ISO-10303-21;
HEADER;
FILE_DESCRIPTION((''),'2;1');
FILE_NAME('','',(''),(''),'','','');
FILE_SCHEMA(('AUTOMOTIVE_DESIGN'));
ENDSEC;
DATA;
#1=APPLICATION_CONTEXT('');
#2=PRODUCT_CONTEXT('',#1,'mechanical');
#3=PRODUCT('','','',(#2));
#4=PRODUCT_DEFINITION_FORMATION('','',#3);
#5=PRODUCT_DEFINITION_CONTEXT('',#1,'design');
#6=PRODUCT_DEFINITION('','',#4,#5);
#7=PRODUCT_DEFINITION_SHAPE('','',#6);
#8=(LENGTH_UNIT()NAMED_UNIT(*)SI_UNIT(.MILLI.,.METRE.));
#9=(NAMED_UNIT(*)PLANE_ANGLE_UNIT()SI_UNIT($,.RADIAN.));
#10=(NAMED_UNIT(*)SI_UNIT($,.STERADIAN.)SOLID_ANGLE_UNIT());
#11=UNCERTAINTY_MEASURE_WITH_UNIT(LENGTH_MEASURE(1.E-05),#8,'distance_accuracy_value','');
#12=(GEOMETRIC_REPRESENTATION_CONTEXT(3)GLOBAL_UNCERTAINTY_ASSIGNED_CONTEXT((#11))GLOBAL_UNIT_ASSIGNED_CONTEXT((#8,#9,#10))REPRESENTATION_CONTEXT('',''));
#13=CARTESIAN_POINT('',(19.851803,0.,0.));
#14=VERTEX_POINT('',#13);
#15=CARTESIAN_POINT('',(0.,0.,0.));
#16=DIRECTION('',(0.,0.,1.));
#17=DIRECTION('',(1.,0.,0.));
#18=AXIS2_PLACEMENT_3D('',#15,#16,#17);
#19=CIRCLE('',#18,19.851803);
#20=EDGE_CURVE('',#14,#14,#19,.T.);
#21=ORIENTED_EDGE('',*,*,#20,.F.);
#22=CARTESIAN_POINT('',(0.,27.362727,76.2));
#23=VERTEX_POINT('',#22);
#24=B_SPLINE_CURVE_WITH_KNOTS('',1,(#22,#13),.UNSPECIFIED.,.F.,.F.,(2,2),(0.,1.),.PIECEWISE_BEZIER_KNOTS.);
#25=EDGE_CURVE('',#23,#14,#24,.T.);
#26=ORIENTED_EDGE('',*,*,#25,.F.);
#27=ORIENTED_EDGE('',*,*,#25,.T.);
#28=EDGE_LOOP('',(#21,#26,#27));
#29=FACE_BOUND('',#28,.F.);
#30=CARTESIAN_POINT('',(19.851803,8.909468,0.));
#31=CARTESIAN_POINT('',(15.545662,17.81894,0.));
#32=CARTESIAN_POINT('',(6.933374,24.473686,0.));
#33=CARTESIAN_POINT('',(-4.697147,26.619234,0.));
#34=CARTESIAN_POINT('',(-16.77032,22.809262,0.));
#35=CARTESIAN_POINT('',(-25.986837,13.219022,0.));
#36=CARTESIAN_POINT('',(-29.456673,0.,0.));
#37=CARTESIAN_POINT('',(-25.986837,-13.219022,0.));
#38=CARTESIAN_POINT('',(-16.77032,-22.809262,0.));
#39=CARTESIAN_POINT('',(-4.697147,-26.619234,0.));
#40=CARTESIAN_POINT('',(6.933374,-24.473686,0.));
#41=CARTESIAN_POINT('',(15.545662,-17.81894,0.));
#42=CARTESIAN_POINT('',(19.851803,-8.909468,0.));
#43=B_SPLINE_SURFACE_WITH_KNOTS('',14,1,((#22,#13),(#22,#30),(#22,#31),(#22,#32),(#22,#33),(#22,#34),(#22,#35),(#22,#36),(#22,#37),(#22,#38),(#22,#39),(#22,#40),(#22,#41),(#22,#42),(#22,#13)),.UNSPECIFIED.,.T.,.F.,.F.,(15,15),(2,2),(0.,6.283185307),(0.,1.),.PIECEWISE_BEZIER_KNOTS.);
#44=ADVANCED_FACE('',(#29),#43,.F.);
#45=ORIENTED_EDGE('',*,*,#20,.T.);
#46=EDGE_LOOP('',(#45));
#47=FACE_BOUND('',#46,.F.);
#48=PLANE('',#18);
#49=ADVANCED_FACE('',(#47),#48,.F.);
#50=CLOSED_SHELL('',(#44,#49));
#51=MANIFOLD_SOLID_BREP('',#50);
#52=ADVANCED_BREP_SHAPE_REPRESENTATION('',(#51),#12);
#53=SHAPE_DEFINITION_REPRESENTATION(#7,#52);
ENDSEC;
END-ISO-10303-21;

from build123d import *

# Parameters (mm, degrees)
F0_R = 19.8518026118


with BuildPart() as f3:
    # F0 (on Top) → F3 section 0
    with BuildSketch(Plane.XY, mode=Mode.PRIVATE) as f3_s0:
        Circle(F0_R)
    loft([Vertex(0, 27.3627266288, 76.2), f3_s0.sketch])


solid = f3.part
